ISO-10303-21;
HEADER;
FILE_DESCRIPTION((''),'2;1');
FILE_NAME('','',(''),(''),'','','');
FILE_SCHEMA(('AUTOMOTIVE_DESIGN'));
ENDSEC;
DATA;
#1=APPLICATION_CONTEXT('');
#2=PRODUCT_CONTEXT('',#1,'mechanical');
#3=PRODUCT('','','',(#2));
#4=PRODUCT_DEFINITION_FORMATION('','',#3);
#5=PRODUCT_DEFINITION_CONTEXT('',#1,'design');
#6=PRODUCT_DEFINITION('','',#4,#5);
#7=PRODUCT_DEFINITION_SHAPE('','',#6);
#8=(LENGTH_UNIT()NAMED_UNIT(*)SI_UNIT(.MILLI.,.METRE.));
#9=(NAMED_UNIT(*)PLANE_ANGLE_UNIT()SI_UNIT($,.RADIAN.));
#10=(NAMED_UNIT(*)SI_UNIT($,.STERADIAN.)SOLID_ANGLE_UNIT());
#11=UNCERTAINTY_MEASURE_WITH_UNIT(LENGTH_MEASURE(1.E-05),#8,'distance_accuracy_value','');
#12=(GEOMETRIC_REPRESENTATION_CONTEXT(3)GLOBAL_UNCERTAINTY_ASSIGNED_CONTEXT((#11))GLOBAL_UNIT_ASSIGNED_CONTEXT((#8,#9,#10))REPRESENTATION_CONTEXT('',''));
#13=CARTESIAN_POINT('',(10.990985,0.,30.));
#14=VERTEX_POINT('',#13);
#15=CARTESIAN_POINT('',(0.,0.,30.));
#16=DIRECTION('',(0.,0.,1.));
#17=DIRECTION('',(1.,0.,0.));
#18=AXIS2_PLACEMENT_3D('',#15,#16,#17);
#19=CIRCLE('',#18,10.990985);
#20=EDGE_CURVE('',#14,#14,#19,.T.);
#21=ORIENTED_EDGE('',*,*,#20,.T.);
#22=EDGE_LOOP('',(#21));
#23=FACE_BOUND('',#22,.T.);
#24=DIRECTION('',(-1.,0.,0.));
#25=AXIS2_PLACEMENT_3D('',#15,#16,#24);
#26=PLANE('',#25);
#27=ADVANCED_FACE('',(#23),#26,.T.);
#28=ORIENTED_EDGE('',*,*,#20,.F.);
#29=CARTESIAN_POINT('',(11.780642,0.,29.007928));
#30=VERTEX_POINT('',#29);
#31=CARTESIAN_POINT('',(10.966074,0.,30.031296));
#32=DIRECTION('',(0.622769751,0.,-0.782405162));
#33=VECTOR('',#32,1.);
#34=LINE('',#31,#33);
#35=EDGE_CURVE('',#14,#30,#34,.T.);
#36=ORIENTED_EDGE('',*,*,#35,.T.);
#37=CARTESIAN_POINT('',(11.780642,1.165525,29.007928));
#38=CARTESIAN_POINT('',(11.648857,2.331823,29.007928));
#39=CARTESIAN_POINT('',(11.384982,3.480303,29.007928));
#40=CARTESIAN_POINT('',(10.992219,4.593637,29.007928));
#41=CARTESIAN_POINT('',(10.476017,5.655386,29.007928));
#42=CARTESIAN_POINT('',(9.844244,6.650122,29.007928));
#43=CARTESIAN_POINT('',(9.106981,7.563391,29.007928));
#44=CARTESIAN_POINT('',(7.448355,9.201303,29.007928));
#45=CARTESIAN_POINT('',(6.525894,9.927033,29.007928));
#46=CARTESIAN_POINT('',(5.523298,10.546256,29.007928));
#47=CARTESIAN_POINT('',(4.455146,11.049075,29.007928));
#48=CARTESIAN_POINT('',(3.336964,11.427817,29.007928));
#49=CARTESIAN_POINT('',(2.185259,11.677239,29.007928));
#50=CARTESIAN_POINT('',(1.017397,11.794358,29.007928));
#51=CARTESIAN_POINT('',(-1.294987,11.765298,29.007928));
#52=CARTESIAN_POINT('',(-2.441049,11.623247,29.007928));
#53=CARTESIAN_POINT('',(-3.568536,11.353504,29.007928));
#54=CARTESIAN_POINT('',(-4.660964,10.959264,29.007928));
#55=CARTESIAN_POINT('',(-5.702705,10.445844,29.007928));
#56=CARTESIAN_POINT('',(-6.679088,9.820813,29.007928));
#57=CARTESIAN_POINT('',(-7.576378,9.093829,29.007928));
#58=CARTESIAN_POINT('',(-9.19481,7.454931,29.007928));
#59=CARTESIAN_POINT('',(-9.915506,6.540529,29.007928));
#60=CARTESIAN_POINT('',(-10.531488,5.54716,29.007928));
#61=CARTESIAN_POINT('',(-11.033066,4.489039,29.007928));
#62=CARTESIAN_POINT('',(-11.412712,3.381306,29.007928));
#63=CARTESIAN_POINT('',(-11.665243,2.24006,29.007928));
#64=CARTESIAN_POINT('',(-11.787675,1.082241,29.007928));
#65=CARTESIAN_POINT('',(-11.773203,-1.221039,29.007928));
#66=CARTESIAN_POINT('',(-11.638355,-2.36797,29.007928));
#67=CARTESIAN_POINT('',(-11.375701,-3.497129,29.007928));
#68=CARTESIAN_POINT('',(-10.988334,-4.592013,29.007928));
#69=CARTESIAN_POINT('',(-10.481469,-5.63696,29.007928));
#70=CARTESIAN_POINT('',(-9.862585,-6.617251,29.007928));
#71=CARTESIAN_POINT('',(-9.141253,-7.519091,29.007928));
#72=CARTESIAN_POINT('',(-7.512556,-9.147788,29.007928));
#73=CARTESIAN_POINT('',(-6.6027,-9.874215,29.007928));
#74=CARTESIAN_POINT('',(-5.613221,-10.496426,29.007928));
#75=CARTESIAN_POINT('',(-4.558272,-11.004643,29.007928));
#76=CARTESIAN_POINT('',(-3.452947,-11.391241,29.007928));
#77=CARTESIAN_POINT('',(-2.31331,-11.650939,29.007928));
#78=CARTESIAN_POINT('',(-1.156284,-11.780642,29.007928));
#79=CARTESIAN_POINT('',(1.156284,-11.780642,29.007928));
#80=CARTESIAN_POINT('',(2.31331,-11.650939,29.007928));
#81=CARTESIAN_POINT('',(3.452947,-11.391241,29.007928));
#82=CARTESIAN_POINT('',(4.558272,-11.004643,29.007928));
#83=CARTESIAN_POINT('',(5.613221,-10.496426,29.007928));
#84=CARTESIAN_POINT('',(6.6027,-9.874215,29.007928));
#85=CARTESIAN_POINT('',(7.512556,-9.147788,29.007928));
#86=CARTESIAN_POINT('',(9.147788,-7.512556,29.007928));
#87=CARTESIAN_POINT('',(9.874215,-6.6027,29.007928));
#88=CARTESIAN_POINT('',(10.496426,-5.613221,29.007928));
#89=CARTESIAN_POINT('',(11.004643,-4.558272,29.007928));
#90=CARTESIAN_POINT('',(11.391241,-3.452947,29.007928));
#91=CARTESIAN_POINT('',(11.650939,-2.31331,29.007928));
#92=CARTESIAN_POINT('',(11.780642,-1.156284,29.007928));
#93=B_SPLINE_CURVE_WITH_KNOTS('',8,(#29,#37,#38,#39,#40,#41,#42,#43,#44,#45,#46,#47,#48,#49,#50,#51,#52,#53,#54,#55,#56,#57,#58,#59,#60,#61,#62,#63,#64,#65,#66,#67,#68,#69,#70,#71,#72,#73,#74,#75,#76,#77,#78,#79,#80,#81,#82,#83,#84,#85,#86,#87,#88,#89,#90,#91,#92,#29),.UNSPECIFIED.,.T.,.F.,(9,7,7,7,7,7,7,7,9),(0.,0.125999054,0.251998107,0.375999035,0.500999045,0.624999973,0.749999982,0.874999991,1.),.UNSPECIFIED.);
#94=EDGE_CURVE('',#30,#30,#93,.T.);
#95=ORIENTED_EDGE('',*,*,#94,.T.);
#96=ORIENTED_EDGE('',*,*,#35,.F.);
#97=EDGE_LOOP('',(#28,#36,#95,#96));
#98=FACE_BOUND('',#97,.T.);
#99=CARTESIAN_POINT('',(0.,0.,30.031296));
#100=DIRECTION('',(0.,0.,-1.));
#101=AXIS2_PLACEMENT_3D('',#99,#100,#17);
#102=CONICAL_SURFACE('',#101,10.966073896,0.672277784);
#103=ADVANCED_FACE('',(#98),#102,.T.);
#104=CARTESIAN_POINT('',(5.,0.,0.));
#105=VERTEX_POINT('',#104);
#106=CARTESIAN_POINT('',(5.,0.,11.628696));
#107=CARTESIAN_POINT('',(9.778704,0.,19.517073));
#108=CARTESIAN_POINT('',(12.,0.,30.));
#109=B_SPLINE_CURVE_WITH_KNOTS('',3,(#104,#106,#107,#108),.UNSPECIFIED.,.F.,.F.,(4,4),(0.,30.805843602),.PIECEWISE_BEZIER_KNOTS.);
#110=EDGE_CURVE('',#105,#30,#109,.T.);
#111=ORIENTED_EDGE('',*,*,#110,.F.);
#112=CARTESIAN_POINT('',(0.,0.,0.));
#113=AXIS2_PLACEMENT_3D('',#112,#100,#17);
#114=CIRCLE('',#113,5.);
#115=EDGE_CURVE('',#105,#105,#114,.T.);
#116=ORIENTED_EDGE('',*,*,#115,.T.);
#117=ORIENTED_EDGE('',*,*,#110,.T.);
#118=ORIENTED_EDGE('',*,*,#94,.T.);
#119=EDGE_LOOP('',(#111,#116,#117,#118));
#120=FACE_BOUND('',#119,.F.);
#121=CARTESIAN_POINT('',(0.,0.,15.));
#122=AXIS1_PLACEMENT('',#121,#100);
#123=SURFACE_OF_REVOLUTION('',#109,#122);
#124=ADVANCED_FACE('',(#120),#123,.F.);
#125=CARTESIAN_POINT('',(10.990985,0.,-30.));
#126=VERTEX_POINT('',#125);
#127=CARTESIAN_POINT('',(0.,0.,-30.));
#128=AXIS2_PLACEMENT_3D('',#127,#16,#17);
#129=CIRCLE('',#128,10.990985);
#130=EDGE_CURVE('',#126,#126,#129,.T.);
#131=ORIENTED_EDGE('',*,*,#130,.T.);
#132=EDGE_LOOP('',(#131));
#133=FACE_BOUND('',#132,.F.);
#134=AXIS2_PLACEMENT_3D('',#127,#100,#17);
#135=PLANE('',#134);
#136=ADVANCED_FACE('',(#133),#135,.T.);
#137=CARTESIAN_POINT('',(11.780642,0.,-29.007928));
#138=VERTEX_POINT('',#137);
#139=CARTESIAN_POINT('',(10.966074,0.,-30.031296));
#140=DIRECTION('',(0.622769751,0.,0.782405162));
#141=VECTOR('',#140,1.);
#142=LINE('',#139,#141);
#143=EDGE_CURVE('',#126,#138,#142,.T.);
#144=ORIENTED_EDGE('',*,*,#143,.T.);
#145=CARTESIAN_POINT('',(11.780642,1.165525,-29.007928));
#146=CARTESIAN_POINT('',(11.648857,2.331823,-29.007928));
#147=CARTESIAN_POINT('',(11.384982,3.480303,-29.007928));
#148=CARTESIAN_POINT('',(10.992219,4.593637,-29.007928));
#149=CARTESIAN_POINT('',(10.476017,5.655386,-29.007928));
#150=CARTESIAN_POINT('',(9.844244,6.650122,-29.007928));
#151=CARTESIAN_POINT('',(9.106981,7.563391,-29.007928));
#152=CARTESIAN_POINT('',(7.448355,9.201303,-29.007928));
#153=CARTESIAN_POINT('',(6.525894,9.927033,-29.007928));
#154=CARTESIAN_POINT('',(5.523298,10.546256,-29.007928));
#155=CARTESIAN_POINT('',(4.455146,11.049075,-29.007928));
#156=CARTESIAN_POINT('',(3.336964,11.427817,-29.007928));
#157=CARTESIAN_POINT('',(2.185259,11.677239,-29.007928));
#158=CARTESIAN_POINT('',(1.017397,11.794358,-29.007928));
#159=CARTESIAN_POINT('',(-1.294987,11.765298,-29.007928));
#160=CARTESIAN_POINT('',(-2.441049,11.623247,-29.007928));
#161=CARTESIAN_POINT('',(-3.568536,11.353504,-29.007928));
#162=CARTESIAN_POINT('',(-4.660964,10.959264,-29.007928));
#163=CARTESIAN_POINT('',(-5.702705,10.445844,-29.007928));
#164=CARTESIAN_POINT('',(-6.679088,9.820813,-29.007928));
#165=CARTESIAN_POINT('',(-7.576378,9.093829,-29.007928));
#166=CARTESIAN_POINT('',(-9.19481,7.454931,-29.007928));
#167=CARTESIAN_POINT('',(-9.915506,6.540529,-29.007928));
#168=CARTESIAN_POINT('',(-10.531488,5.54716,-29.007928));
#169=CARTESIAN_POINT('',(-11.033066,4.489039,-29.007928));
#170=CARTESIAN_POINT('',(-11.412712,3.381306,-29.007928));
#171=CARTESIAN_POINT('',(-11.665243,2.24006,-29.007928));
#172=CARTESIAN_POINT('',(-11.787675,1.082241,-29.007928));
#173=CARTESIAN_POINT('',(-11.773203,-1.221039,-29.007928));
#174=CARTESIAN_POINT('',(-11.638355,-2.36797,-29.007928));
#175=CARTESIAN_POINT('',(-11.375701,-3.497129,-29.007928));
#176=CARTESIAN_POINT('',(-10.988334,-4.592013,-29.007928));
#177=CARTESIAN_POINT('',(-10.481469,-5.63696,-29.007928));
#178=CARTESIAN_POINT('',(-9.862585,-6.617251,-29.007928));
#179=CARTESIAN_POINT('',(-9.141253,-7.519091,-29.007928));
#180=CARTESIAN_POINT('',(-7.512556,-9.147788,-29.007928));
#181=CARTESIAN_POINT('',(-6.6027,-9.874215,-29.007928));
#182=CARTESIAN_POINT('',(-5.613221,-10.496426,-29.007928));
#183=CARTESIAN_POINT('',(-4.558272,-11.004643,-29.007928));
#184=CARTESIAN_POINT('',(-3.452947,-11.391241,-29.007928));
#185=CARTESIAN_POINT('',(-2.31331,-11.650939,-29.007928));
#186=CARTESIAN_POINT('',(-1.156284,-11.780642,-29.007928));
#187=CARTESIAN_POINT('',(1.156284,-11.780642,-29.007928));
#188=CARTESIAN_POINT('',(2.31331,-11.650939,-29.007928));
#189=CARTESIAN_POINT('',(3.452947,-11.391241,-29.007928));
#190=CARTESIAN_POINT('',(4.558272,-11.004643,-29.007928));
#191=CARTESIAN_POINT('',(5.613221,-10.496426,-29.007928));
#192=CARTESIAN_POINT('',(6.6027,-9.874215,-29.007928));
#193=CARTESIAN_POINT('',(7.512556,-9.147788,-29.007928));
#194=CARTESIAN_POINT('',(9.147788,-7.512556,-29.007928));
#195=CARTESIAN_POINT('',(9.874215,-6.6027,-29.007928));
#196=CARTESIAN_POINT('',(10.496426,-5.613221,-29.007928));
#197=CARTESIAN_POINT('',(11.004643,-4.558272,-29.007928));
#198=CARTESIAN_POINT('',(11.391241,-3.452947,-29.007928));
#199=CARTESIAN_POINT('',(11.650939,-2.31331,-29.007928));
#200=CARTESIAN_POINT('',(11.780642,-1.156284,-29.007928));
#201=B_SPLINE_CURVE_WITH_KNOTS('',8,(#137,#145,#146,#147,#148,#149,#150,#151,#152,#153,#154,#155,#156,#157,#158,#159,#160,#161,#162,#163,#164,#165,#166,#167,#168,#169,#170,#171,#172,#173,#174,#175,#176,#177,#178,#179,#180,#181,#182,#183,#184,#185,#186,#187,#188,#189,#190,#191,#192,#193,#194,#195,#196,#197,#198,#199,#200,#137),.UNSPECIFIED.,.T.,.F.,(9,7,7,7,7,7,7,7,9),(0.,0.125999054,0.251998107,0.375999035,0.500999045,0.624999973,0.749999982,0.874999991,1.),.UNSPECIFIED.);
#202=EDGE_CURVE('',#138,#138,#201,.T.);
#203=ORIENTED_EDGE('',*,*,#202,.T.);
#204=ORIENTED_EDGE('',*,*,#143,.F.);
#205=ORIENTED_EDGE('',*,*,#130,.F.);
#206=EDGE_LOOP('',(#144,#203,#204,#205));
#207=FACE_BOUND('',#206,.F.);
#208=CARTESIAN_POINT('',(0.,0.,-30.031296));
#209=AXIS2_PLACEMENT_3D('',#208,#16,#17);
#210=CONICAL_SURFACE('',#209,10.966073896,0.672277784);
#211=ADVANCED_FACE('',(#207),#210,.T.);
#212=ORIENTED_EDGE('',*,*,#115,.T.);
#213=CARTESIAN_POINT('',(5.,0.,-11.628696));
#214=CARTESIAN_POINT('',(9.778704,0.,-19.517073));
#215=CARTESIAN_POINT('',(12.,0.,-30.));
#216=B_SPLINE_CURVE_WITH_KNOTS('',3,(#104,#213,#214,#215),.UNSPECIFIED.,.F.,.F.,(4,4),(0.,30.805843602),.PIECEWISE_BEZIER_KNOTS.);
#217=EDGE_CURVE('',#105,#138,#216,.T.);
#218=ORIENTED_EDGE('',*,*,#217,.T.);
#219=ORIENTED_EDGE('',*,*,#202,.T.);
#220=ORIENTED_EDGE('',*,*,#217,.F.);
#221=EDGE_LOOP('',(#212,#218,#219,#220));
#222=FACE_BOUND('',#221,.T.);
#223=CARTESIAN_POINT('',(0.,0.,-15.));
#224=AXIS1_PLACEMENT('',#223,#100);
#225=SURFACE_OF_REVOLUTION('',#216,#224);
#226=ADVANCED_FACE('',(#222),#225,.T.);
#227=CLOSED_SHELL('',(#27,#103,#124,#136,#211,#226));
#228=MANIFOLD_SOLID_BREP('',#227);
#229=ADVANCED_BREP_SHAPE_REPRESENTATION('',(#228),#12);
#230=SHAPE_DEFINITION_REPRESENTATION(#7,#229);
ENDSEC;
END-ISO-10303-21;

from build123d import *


# Not quite as in the source:
# - a fillet or chamfer that OpenCascade refuses, or shapes differently, is made with other operations: its cross-section is extruded or revolved along the edge and cut away or added


with BuildPart() as f1:
    # F0 (on Front) → F1 (revolve)
    with BuildSketch(Plane.XZ):
        with BuildLine():
            Line((0, 0), (0, -30))
            Line((0, -30), (12, -30))
            add(Edge.make_bspline(
                [(5, 0), (5, -11.6286956261), (9.7787035629, -19.5170734078), (12, -30)],
                knots=[0, 0, 0, 0, 30.8058436015, 30.8058436015, 30.8058436015, 30.8058436015], degree=3))
            Line((5, 0), (0, 0))
        make_face()
    revolve(axis=Axis((0, 0, -15), (0, 0, -1)))

    # F2: chamfer of 1 on 1 edges, made by hand

    # F2_s1 → F2_t2 (revolve, cut)
    with BuildSketch(Plane.XZ):
        with BuildLine():
            Line((10.966073896, -30.0312962065), (11.8055530365, -28.9766322442))
            Line((11.8055530365, -28.9766322442), (11.8250433673, -28.9721459307))
            ThreePointArc((11.8250433673, -28.9721459307), (11.9092913241, -29.4868738611), (12.0195655741, -29.9958541215))
            Line((12.0195655741, -29.9958541215), (12, -30.02))
            ThreePointArc((12, -30.02), (11.483036948, -30.02), (10.966073896, -30.0512962065))
            Line((10.966073896, -30.0512962065), (10.966073896, -30.0312962065))
        make_face()
    revolve(axis=Axis((0, 0, -30), (0, 0, -1)), mode=Mode.SUBTRACT)

    # F3: F1 across plane


with BuildPart() as f1_1:
    add(f1.part)
    add(f1.part.mirror(Plane.XY))


solid = f1_1.part
